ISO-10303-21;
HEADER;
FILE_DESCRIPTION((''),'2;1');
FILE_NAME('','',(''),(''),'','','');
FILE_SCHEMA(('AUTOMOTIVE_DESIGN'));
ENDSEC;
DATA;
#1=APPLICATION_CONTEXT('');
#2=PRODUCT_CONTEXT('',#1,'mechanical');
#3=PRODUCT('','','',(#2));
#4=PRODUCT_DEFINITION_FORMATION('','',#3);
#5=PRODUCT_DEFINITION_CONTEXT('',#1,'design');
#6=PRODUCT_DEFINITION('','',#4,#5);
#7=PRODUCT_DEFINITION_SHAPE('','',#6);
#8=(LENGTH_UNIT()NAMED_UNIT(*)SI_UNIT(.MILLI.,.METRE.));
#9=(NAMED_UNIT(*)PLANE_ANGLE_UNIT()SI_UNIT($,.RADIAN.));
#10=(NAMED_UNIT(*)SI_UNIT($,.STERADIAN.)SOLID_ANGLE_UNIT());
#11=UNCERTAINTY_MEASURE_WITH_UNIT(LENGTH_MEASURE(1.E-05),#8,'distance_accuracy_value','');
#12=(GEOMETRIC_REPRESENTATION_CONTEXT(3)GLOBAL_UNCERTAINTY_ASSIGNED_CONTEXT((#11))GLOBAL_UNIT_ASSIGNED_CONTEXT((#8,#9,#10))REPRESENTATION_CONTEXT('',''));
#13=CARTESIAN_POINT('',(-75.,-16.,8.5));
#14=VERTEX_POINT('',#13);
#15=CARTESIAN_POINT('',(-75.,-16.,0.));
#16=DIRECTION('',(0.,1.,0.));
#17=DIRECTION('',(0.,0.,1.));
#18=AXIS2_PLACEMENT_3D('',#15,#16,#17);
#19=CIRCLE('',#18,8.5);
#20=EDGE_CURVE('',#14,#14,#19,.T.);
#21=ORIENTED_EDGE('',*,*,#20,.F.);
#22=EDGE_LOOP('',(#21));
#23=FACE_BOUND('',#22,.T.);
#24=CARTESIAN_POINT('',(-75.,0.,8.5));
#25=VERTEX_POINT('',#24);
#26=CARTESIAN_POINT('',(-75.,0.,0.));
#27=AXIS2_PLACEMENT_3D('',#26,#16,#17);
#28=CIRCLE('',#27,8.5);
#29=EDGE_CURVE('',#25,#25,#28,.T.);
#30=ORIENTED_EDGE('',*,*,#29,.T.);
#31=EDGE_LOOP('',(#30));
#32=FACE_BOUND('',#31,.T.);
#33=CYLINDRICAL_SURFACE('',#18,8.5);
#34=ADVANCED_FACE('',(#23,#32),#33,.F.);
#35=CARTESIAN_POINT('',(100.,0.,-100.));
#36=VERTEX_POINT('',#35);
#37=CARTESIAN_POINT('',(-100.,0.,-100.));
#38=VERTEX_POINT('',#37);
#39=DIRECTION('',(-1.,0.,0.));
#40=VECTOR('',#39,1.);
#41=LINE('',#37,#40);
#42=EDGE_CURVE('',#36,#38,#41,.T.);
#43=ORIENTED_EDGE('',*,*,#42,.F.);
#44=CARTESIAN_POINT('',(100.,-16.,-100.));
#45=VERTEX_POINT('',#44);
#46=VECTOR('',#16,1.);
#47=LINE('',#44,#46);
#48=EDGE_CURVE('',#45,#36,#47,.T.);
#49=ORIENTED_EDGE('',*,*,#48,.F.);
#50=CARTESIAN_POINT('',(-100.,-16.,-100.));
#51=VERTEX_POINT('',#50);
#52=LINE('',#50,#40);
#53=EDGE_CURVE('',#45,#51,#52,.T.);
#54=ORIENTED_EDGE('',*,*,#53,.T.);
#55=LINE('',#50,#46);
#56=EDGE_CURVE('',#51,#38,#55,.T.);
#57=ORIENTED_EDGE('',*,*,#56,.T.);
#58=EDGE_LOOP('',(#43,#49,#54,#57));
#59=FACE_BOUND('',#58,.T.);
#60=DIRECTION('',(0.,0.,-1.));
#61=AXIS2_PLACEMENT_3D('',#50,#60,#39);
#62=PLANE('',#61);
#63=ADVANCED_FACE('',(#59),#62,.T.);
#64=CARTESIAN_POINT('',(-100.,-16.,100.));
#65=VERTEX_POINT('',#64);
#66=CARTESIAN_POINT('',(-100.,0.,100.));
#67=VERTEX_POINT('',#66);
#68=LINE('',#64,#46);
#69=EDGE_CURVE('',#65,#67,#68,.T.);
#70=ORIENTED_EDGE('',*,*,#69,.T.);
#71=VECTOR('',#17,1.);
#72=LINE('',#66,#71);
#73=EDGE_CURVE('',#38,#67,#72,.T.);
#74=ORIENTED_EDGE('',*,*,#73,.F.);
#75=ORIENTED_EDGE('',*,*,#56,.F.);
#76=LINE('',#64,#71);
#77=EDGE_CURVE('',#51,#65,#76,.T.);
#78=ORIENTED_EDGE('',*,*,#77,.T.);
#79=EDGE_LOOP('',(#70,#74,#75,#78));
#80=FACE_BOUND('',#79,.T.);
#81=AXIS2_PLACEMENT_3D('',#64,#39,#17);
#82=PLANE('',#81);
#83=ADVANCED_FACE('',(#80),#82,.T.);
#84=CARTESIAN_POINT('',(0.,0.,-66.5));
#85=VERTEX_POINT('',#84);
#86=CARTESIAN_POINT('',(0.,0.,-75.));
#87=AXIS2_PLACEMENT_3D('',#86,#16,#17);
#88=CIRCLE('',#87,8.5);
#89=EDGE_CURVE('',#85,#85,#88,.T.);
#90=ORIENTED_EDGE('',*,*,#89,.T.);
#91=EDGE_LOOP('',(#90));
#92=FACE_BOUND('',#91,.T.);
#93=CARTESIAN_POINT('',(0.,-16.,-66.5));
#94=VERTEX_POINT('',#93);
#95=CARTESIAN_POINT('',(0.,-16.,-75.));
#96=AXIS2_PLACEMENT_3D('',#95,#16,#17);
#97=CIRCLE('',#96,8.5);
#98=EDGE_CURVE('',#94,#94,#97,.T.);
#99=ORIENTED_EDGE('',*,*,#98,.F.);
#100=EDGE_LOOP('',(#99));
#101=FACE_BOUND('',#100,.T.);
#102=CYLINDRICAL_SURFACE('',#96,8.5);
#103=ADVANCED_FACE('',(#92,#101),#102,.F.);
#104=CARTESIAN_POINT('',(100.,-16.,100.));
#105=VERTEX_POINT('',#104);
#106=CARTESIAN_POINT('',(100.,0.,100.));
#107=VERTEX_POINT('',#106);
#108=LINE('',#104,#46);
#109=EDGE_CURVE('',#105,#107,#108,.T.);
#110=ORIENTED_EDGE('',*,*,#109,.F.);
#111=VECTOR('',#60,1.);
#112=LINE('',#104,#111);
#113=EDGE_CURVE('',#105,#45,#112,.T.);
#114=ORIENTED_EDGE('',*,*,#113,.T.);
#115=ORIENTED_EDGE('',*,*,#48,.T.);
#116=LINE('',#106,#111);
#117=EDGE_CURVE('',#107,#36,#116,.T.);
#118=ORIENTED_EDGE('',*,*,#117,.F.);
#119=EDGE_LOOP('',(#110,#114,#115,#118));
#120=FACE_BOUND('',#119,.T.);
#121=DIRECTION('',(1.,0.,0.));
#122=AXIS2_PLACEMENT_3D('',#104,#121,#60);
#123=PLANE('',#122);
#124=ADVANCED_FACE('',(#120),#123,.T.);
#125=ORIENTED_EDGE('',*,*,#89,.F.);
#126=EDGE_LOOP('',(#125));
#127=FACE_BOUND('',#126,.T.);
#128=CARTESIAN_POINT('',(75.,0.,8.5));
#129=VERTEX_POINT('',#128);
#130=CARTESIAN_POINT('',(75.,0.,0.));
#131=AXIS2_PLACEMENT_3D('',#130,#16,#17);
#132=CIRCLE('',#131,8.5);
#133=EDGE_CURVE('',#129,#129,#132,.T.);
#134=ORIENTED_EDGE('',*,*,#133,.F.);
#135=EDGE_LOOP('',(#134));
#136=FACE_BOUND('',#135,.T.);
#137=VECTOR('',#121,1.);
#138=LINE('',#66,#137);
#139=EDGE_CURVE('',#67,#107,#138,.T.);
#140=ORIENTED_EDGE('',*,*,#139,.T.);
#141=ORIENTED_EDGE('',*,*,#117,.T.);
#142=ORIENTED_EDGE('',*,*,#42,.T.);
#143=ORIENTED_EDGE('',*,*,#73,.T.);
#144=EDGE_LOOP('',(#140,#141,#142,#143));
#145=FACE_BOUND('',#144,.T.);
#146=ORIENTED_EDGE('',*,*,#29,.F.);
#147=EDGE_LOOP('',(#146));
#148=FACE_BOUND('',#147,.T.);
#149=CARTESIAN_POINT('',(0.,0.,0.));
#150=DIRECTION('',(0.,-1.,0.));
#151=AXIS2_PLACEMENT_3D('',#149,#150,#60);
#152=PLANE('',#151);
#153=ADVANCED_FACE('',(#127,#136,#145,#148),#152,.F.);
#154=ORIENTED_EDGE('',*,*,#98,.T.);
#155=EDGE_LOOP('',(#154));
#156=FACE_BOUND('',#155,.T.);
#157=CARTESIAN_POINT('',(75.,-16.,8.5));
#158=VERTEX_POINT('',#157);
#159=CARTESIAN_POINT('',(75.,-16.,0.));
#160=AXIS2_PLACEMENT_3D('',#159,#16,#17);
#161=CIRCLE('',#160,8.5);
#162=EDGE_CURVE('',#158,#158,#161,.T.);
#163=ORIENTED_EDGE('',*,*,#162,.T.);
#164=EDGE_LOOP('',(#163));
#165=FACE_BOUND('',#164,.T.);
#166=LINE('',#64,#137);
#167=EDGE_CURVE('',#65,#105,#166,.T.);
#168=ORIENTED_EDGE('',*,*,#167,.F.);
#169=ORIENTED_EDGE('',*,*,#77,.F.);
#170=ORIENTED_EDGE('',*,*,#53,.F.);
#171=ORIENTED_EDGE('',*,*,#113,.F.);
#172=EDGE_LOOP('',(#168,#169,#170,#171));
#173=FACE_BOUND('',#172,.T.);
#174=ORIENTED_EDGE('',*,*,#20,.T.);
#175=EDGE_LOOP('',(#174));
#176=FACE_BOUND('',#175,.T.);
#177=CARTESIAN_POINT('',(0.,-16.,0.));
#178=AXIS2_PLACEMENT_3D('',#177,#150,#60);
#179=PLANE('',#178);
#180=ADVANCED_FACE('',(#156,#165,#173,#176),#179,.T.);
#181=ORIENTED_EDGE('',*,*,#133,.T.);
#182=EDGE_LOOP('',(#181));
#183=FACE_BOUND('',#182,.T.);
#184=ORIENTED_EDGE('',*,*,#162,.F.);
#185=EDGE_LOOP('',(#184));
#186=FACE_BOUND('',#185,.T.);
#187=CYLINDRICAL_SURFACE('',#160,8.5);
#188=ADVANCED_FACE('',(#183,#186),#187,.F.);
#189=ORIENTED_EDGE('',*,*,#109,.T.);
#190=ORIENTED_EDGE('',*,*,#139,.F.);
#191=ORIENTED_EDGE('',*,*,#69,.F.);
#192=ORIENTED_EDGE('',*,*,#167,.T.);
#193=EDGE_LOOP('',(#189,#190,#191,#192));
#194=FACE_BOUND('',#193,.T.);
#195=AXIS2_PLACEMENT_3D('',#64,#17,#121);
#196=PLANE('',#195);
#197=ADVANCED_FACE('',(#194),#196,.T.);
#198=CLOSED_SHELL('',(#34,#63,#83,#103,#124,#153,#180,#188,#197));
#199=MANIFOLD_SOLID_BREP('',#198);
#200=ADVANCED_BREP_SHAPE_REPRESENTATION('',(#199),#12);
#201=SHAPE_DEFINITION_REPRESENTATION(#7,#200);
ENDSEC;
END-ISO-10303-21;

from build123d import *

# Parameters (mm, degrees)
SKETCH_1_W             = 200
SKETCH_1_H             = 200
SKETCH_1_R             = 8.5
SM_BASE_FLANGE_1_DEPTH = 16


# Sheet-metal steps are written as plain solids
with BuildPart() as part:
    # Sketch 1 → Базовая кромка1 (new body)
    with BuildSketch(Plane(origin=(0, 0, 0), x_dir=(1, 0, 0), z_dir=(0, 1, 0))):
        Rectangle(SKETCH_1_W, SKETCH_1_H)
        with Locations(Location((0, 75, 0), (0, 0, 270))):
            Circle(SKETCH_1_R, mode=Mode.SUBTRACT)
        with Locations(Location((-75, 0, 0), (0, 0, 270))):
            Circle(SKETCH_1_R, mode=Mode.SUBTRACT)
        with Locations(Location((75, 0, 0), (0, 0, 270))):
            Circle(SKETCH_1_R, mode=Mode.SUBTRACT)
    extrude(amount=-SM_BASE_FLANGE_1_DEPTH)


solid = part.part
